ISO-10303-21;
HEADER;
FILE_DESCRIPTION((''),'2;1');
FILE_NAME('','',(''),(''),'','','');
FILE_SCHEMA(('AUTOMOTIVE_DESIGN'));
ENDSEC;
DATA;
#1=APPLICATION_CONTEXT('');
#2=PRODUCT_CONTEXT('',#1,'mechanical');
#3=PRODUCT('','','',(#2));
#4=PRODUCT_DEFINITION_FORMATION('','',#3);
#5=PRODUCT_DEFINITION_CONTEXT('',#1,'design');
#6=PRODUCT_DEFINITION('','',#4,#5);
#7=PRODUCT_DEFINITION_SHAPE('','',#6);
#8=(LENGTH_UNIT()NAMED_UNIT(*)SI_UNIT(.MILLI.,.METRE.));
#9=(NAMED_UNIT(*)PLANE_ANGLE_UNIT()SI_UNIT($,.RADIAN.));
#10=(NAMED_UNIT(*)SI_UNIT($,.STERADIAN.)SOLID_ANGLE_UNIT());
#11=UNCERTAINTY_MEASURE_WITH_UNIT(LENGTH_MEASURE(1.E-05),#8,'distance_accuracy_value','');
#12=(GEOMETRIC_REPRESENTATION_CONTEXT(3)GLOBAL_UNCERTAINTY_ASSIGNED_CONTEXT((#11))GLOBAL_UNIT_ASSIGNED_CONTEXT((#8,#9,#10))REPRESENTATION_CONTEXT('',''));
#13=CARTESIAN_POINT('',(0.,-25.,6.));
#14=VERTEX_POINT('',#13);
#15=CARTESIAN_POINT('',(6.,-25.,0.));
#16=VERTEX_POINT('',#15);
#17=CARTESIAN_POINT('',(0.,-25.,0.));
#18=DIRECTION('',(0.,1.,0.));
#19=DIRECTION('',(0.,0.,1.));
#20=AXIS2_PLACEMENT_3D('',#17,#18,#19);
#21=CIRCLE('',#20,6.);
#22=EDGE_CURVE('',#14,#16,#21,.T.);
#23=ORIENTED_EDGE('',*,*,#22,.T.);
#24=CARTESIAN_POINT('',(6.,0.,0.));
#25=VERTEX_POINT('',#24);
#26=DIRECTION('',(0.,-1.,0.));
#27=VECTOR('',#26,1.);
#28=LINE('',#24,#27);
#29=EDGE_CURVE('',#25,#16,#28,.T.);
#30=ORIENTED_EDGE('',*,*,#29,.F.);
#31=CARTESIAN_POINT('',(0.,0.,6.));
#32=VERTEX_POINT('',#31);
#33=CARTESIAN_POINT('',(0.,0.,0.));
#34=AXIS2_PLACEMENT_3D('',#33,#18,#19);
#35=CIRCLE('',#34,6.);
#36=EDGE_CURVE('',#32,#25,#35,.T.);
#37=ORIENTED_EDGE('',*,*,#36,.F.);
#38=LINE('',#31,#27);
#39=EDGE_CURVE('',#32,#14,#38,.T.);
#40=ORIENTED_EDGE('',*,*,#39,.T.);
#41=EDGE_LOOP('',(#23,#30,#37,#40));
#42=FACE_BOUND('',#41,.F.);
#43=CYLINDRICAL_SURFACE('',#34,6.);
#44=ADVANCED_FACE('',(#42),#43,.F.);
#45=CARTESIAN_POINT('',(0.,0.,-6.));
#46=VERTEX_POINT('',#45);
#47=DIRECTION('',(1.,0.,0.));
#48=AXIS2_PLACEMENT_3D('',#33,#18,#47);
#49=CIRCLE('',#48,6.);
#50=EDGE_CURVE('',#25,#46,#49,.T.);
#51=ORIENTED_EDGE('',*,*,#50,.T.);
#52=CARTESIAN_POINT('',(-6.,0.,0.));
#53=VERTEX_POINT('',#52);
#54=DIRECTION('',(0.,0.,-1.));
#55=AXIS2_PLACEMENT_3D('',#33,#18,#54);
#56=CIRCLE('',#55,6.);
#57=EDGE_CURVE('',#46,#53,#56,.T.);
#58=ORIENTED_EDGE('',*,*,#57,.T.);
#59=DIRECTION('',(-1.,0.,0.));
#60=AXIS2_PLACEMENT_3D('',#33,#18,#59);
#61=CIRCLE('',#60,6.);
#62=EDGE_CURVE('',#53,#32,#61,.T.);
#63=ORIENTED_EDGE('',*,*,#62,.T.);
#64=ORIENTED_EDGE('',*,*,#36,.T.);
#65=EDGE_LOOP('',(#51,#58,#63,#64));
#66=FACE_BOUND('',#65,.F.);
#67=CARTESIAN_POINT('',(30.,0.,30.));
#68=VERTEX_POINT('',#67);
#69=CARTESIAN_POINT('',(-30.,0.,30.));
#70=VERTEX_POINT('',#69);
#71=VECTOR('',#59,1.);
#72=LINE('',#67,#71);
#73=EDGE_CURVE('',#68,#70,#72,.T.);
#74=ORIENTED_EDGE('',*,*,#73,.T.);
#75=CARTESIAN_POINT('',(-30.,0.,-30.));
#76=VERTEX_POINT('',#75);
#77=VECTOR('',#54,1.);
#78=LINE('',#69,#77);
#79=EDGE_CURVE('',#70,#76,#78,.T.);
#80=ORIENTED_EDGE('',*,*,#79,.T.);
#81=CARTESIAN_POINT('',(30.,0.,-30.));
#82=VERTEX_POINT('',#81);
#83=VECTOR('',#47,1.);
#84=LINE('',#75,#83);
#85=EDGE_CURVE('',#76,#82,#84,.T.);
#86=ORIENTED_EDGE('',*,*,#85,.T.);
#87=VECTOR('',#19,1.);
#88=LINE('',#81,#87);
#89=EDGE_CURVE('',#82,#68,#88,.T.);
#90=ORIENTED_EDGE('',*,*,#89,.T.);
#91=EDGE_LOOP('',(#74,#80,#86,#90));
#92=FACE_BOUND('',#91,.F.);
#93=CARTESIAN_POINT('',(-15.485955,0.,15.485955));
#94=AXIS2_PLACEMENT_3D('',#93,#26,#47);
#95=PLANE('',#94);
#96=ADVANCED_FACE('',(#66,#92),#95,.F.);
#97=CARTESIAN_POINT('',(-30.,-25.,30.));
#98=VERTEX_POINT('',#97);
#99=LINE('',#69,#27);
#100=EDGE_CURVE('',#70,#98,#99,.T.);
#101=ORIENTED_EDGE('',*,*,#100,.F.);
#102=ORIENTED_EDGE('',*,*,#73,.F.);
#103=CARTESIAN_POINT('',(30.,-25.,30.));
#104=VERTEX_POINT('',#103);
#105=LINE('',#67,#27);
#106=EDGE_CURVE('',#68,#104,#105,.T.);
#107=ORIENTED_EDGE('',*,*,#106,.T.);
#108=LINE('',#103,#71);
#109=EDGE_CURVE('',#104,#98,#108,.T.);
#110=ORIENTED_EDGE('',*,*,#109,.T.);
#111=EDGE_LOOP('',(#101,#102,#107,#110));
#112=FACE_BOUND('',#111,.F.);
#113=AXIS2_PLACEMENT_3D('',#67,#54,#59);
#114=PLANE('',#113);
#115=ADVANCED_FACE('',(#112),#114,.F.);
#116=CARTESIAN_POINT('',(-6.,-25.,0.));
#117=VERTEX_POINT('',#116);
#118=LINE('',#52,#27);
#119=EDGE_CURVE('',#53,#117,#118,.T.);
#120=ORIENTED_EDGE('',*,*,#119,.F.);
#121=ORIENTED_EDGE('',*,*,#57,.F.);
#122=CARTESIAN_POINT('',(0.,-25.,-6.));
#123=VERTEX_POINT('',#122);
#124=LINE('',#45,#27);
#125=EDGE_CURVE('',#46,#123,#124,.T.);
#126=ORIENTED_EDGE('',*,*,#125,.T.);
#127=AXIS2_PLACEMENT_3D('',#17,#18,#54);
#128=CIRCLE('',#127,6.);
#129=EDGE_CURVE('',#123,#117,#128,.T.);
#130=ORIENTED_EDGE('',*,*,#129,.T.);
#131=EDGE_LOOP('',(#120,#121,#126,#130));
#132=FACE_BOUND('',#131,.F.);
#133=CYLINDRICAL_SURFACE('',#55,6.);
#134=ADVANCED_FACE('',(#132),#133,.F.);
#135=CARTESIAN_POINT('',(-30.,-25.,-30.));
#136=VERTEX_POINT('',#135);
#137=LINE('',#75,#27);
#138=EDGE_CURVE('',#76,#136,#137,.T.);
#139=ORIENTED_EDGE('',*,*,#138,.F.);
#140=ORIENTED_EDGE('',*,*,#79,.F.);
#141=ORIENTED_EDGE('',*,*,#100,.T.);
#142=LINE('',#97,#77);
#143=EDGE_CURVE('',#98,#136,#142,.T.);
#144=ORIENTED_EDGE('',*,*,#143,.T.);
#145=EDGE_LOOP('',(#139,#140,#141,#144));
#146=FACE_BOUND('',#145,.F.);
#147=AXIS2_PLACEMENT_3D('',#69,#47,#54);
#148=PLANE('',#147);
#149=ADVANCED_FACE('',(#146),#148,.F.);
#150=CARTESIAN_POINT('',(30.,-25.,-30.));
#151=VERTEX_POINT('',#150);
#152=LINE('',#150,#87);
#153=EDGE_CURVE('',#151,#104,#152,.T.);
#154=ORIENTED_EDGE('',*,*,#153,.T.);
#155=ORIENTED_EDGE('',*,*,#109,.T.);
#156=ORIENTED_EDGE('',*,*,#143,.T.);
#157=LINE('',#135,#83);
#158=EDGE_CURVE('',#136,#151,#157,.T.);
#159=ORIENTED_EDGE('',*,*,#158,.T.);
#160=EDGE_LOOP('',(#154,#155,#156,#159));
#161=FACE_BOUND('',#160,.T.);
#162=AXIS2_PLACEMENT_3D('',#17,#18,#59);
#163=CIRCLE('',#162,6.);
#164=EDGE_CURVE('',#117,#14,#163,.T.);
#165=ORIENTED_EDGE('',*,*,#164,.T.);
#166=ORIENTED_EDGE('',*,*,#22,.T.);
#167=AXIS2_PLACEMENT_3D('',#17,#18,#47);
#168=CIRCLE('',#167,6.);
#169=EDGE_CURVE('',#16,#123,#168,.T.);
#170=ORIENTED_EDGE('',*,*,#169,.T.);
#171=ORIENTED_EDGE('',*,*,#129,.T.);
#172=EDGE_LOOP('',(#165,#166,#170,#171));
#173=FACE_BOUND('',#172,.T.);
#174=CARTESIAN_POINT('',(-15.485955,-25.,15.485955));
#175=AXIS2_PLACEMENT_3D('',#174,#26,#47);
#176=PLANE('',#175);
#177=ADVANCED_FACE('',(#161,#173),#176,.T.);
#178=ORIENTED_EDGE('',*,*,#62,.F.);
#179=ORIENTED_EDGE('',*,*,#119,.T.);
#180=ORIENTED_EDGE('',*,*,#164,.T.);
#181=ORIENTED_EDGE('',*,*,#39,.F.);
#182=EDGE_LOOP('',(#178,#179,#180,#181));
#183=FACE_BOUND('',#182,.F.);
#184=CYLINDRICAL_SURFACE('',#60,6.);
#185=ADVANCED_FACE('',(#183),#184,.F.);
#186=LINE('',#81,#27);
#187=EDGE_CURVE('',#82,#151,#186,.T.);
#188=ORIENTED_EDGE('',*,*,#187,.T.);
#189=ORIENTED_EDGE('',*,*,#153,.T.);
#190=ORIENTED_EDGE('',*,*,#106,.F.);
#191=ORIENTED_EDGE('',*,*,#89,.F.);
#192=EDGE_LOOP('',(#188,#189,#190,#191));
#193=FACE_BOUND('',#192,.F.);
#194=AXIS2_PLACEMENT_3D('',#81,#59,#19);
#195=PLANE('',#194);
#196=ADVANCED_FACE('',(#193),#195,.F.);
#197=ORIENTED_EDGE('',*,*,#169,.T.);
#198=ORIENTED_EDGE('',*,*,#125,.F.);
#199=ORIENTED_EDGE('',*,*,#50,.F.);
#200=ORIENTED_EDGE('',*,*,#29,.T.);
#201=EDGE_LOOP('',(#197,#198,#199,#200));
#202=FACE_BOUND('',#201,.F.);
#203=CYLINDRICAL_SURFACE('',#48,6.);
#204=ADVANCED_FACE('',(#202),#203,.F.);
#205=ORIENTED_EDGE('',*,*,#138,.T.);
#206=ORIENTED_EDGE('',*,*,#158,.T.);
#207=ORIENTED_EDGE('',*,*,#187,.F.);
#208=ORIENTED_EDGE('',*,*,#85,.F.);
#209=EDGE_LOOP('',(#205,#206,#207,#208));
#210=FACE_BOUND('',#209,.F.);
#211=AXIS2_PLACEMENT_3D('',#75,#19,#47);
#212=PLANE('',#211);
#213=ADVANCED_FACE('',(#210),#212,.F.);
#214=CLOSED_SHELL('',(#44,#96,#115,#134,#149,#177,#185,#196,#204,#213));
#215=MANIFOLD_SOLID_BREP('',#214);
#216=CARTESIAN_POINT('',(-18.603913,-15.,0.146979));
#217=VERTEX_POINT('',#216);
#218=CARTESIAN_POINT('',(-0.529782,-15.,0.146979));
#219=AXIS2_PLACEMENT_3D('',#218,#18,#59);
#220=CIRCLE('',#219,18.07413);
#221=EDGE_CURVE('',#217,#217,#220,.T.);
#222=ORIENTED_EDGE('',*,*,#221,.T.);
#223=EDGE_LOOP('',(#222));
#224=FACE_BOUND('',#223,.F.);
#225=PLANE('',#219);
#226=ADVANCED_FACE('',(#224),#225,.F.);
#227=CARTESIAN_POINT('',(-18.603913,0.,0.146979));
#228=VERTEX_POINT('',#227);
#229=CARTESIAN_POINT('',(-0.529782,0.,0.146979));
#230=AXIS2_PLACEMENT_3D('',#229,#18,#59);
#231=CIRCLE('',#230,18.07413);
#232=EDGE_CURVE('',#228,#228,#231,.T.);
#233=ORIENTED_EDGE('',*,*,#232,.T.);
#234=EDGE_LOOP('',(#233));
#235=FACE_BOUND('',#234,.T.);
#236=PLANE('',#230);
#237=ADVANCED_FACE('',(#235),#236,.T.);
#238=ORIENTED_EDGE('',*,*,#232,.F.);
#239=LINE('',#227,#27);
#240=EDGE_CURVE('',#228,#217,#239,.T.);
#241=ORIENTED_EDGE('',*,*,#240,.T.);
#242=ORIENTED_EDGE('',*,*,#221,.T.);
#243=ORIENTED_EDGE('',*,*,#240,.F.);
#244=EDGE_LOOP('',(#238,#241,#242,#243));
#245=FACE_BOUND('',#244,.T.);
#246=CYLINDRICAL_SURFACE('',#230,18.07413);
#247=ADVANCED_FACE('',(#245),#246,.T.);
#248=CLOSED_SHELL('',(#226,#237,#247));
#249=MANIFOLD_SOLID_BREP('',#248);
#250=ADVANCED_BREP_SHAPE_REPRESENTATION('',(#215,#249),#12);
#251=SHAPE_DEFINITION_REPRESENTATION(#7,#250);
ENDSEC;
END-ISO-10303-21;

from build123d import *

# Parameters (mm, degrees)
F1_DEPTH = 25
F2_R     = 18.0741301682
F2_R_2   = 11.1620865302
F2_R_3   = 6
F3_DEPTH = 15


with BuildPart() as f1:
    # F0 (on Front) → F1 (new body)
    with BuildSketch(Plane.XZ):
        with BuildLine():
            ThreePointArc((-6, 0), (-4.2426406871, 4.2426406871), (0, 6))
            Line((0, 6), (0, 30))
            Line((0, 30), (-30, 30))
            Line((-30, 30), (-30, 0))
            Line((-30, 0), (-6, 0))
        make_face()
        with BuildLine():
            ThreePointArc((0, 6), (4.2426406871, 4.2426406871), (6, 0))
            Line((6, 0), (30, 0))
            Line((30, 0), (30, 30))
            Line((30, 30), (0, 30))
            Line((0, 30), (0, 6))
        make_face()
        with BuildLine():
            Line((30, 0), (6, 0))
            ThreePointArc((6, 0), (4.2426406871, -4.2426406871), (0, -6))
            Line((0, -6), (0, -30))
            Line((0, -30), (30, -30))
            Line((30, -30), (30, 0))
        make_face()
        with BuildLine():
            Line((0, -30), (0, -6))
            ThreePointArc((0, -6), (-4.2426406871, -4.2426406871), (-6, 0))
            Line((-6, 0), (-30, 0))
            Line((-30, 0), (-30, -30))
            Line((-30, -30), (0, -30))
        make_face()
    extrude(amount=F1_DEPTH)


with BuildPart() as f3:
    # F2 (on face) → F3 (new body)
    with BuildSketch(Plane(origin=(0, 0, 0), x_dir=(-1, 0, 0), z_dir=(0, 1, 0))):
        with Locations((0.5297824973, 0.1469794079)):
            Circle(F2_R)
        Circle(F2_R_2, mode=Mode.SUBTRACT)
        Circle(F2_R_2)
        Circle(F2_R_3, mode=Mode.SUBTRACT)
        Circle(F2_R_3)
    extrude(amount=-F3_DEPTH)


solid = Compound([f1.part, f3.part])
